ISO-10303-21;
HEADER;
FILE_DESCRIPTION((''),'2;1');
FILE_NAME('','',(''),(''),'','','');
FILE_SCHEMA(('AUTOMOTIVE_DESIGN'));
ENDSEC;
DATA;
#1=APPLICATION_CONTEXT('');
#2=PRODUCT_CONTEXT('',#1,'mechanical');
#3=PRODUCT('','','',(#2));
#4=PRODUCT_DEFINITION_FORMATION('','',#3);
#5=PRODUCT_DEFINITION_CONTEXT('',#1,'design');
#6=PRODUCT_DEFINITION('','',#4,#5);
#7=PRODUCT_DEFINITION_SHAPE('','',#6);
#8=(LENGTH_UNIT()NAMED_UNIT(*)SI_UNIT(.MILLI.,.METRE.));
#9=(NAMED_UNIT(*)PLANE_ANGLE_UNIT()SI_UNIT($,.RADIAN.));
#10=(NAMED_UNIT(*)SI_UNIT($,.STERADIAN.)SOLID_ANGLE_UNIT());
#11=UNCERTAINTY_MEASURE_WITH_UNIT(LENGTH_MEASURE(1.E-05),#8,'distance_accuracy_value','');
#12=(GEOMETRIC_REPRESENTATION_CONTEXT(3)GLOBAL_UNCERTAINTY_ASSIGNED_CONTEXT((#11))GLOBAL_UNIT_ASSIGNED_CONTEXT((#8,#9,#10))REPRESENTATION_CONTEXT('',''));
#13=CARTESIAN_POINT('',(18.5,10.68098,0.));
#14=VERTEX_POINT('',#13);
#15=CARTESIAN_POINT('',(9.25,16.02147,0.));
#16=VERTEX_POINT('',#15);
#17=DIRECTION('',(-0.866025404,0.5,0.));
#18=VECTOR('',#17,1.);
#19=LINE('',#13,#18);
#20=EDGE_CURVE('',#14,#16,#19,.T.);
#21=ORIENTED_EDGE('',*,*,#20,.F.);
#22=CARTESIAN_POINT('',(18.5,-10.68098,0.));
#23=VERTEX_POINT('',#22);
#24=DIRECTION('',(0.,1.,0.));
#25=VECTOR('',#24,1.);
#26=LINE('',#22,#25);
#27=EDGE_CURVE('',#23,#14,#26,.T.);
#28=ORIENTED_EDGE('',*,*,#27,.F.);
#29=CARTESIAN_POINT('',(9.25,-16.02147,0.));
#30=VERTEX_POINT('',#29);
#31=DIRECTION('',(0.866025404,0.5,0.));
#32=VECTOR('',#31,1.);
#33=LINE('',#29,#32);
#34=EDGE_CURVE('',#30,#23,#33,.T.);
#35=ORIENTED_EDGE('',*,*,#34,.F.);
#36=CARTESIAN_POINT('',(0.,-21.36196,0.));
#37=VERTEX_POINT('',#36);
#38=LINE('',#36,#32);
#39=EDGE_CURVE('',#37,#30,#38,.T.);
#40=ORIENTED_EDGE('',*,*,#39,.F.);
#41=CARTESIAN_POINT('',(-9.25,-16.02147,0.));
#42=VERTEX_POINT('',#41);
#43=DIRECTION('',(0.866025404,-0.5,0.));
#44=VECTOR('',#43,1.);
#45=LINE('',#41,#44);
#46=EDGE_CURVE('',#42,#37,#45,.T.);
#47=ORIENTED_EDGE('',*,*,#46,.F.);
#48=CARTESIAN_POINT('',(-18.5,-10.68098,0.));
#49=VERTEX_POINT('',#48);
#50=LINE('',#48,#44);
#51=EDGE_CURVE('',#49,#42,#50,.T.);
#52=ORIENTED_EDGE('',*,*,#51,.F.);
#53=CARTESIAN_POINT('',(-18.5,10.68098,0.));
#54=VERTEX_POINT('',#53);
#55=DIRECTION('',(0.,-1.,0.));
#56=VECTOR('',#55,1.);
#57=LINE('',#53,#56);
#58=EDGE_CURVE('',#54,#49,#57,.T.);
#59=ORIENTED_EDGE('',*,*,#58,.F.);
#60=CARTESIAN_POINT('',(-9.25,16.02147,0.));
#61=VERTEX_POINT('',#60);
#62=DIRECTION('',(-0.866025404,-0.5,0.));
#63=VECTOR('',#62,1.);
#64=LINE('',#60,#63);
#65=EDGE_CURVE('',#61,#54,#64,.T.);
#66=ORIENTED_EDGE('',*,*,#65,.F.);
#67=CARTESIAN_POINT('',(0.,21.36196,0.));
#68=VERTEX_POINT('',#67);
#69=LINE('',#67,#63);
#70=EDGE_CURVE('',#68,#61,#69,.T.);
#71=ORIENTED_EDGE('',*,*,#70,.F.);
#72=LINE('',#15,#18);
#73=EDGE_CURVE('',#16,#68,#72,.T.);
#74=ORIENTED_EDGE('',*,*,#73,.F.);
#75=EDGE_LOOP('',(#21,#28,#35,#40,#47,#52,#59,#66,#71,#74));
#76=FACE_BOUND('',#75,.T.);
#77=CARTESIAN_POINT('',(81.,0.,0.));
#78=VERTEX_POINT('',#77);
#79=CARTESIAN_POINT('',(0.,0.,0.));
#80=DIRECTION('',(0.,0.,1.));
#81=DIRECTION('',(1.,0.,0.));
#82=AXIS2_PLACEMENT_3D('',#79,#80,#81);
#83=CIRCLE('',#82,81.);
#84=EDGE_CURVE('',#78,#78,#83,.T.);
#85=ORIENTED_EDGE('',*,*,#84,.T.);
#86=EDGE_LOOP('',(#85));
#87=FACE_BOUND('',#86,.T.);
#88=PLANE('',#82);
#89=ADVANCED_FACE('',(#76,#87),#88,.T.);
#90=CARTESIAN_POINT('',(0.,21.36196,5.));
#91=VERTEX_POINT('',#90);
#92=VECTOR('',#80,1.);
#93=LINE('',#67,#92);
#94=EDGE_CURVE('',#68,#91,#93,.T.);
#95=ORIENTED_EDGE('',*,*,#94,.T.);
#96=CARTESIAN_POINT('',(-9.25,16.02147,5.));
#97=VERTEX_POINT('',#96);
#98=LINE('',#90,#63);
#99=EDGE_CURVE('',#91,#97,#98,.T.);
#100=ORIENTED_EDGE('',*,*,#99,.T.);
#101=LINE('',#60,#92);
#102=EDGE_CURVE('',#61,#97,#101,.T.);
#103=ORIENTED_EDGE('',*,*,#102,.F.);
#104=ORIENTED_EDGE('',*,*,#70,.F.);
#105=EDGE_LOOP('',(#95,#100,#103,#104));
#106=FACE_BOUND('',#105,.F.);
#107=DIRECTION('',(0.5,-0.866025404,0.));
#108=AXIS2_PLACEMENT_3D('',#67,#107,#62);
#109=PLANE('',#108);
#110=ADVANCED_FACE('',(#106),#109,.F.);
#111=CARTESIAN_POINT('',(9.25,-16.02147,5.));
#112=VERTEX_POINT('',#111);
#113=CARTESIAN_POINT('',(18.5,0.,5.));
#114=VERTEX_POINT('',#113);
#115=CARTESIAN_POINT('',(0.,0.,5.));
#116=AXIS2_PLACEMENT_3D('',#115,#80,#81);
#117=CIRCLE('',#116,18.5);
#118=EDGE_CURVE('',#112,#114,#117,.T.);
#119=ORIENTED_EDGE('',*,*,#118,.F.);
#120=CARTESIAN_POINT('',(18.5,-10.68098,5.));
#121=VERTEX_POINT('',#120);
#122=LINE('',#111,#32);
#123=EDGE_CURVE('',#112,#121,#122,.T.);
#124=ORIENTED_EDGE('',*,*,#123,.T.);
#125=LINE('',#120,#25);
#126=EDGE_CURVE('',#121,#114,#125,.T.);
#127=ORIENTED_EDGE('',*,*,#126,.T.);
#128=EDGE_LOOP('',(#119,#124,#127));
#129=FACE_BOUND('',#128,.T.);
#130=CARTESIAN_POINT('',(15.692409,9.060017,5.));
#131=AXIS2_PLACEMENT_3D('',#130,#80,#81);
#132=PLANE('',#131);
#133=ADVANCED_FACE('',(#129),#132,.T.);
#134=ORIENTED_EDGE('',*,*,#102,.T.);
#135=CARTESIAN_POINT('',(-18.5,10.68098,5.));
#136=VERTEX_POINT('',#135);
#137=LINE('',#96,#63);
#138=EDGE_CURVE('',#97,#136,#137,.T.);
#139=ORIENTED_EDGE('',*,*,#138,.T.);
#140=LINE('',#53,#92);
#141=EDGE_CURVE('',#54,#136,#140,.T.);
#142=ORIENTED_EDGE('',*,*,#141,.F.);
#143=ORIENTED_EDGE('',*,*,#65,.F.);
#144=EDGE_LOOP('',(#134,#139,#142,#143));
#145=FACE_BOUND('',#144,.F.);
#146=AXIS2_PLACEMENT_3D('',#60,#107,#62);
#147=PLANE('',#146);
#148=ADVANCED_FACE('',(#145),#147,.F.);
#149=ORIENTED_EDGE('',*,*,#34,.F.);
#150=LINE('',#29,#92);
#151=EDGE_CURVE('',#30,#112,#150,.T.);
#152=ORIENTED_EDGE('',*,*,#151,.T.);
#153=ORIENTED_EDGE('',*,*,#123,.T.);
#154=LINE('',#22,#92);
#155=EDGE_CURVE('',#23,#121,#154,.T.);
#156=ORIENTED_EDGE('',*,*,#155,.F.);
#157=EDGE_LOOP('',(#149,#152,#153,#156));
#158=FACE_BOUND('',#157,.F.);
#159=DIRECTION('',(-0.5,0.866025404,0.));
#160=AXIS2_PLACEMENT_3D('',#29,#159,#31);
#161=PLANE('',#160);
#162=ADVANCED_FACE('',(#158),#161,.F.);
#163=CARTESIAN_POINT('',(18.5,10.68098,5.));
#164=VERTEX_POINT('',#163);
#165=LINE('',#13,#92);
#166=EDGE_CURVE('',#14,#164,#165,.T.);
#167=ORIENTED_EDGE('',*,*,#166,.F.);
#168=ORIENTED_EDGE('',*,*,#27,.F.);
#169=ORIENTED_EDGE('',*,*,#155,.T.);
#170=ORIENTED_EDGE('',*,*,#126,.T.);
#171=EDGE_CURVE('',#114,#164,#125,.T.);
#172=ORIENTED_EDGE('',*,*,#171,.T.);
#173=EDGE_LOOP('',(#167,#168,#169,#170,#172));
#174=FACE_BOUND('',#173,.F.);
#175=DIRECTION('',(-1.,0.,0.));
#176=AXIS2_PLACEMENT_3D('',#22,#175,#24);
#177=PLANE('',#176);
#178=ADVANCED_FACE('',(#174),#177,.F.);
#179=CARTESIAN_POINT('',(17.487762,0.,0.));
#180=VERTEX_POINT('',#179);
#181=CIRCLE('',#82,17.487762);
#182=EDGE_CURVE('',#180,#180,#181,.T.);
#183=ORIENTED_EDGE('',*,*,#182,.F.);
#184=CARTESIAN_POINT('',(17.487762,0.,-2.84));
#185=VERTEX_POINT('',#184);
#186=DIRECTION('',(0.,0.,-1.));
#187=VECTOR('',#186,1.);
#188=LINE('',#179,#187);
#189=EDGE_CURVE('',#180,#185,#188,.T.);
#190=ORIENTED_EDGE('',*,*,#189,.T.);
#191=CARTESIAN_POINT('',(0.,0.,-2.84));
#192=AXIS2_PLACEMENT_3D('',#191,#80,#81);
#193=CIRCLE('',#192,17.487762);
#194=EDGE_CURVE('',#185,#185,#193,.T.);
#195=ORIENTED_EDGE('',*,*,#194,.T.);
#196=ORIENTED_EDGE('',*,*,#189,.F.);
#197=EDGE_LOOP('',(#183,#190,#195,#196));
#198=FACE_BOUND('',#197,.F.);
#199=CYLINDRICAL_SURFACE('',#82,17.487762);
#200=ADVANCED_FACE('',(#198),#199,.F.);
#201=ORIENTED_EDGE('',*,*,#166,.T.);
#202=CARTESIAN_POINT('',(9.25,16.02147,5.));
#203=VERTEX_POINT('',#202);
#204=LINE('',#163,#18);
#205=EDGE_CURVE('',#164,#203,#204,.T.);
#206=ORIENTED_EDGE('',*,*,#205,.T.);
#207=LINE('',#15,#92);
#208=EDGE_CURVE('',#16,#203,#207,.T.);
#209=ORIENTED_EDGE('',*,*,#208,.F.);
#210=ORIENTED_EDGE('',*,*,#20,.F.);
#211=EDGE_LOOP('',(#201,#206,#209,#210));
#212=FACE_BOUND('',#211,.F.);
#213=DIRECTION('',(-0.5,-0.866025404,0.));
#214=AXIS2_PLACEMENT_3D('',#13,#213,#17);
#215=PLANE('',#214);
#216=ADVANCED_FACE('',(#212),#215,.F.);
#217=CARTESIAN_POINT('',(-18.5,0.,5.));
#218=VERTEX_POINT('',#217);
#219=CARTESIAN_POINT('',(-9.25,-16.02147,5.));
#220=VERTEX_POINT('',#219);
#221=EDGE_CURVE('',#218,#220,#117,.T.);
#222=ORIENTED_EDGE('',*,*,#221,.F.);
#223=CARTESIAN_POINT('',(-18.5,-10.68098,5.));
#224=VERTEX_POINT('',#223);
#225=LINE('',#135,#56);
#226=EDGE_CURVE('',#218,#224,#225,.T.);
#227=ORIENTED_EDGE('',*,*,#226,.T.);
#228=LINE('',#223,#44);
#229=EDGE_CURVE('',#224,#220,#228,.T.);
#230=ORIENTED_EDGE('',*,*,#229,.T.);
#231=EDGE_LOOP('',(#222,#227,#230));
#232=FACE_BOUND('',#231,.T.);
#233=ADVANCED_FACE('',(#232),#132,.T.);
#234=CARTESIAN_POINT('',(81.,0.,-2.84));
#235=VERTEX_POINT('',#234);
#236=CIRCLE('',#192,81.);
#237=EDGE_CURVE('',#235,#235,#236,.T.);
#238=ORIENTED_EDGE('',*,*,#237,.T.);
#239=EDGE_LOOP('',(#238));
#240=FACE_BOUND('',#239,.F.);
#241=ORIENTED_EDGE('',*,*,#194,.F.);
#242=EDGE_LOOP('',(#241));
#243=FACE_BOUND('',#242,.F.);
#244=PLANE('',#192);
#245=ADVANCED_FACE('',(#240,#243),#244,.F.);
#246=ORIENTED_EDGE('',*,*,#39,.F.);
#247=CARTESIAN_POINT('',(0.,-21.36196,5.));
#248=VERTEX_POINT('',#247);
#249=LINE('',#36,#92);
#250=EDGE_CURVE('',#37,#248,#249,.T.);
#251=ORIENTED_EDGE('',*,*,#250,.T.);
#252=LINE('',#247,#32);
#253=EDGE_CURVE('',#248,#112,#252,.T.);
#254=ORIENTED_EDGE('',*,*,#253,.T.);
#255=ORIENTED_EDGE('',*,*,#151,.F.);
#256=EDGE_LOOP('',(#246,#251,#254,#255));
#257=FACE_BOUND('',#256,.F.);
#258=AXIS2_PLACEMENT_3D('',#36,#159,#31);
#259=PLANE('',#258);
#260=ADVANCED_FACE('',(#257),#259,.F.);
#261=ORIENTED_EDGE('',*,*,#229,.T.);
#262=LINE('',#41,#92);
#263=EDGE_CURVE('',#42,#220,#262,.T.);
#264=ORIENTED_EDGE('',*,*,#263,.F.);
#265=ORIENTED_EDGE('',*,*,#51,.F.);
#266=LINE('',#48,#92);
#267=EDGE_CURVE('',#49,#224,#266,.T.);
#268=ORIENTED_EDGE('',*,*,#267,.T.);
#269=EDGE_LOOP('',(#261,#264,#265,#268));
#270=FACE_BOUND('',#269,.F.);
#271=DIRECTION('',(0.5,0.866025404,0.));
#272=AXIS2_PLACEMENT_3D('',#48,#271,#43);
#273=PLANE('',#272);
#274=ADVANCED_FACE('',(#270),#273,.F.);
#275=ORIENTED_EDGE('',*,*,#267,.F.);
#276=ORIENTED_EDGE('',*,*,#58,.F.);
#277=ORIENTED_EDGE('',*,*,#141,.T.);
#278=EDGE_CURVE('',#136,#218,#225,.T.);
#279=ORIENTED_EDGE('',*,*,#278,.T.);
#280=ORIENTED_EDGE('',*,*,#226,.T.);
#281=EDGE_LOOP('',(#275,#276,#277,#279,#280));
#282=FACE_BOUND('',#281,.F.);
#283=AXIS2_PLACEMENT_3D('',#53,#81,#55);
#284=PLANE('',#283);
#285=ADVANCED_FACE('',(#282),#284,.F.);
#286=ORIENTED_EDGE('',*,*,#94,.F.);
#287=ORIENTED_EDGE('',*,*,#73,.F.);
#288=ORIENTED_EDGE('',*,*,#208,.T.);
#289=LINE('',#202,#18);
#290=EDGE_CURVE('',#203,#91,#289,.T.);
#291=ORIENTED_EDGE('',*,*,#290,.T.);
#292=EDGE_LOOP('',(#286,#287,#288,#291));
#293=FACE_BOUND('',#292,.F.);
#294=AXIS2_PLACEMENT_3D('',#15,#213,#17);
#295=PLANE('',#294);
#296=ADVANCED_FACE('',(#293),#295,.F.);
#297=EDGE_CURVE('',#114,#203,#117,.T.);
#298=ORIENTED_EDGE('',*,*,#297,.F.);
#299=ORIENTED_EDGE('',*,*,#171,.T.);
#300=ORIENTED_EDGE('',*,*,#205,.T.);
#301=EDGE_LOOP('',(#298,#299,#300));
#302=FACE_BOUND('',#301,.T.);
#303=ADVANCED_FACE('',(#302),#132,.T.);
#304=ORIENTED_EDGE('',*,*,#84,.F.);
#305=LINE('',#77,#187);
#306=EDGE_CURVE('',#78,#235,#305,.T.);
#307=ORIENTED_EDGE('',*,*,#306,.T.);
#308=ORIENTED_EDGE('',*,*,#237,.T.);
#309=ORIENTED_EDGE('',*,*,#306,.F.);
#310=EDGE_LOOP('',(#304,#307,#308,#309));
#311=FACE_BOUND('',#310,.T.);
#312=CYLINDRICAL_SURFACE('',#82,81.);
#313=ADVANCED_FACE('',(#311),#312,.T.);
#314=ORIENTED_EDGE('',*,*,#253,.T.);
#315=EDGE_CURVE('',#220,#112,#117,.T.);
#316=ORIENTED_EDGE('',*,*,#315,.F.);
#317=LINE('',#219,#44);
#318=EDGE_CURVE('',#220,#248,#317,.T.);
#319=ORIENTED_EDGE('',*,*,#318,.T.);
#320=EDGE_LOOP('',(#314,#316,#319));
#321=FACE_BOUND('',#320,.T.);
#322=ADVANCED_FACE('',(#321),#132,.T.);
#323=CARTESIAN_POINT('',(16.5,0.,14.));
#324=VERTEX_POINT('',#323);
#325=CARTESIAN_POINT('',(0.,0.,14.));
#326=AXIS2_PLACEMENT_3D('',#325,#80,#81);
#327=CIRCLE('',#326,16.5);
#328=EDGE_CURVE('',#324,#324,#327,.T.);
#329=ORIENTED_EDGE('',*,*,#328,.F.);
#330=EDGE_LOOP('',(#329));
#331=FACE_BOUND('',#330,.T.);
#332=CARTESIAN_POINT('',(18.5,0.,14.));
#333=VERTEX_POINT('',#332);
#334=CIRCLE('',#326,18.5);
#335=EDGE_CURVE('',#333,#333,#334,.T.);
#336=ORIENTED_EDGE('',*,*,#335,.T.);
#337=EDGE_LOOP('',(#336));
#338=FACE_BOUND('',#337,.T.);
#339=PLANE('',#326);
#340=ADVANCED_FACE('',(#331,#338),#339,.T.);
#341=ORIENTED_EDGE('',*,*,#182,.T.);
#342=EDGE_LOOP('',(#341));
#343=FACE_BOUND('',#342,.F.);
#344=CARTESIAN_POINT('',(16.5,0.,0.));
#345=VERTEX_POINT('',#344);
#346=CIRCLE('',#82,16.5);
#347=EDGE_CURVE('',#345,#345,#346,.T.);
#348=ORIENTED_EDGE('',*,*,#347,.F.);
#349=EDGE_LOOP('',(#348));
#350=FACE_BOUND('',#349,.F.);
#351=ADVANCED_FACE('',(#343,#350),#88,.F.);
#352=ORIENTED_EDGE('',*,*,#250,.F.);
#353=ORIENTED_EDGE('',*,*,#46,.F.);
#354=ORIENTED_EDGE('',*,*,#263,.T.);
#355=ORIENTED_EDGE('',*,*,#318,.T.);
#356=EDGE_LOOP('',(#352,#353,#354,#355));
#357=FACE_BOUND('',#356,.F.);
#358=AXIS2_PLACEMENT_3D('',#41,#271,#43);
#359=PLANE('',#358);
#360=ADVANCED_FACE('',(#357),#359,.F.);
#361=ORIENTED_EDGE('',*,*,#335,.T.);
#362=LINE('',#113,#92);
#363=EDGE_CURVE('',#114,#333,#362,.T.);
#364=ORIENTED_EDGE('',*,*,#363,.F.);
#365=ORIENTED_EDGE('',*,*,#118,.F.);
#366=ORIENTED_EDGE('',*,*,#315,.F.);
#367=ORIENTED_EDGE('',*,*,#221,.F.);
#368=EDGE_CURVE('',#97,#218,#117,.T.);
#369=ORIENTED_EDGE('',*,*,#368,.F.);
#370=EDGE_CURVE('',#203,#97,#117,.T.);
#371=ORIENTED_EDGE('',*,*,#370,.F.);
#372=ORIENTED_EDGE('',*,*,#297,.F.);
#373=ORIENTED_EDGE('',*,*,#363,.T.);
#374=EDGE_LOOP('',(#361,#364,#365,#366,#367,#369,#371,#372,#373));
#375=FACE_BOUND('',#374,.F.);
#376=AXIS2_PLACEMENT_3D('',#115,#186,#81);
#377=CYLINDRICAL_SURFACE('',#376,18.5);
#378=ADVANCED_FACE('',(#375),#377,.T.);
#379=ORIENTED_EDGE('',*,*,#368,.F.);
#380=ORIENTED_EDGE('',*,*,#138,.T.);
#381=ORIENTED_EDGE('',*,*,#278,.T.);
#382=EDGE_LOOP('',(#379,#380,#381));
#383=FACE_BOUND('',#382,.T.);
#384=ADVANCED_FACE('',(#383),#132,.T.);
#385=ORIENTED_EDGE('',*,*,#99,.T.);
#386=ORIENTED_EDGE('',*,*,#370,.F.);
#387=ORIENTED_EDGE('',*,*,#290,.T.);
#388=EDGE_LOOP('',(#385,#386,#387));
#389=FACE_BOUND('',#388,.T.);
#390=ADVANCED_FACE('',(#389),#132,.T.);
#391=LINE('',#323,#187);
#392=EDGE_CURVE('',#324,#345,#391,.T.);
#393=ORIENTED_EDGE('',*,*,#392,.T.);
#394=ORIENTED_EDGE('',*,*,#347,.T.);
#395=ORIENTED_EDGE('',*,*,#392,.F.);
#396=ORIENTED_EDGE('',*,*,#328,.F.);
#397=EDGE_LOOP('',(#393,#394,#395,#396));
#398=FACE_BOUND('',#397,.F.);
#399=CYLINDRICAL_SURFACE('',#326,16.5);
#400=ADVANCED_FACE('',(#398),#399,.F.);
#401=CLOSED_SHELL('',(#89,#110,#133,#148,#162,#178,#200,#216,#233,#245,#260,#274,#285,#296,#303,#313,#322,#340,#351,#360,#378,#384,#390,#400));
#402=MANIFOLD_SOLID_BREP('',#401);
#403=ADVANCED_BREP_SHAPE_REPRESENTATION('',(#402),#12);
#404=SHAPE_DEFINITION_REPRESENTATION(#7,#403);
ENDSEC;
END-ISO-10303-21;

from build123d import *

# Parameters (mm, degrees)
F1_DEPTH = 5
F2_R     = 18.5
F3_DEPTH = 9
F4_R     = 16.5
F5_DEPTH = 25
F6_R     = 81
F7_DEPTH = 2.84
F8_R     = 17.4877623158
F9_DEPTH = 25


with BuildPart() as f1:
    # F0 (on Top) → F1 (new body)
    with BuildSketch(Plane.XY):
        with BuildLine():
            Line((18.5, 0), (18.5, 10.68097998))
            Line((18.5, 10.68097998), (9.2500001737, 16.0214698697))
            ThreePointArc((9.2500001737, 16.0214698697), (16.0214700202, 9.2499999131), (18.5, 0))
        make_face()
        with BuildLine():
            ThreePointArc((9.2500002367, -16.0214698334), (16.0214700383, -9.2499998817), (18.5, 0))
            ThreePointArc((18.5, 0), (16.0214700202, 9.2499999131), (9.2500001737, 16.0214698697))
            ThreePointArc((9.2500001737, 16.0214698697), (3.666e-07, 18.5), (-9.2499995387, 16.0214702364))
            ThreePointArc((-9.2499995387, 16.0214702364), (-16.0214698368, 9.2500002307), (-18.5, 0))
            ThreePointArc((-18.5, 0), (-16.0214699908, -9.2499999641), (-9.2500000719, -16.0214699285))
            ThreePointArc((-9.2500000719, -16.0214699285), (9.51e-08, -18.5), (9.2500002367, -16.0214698334))
        make_face()
        with BuildLine():
            Line((18.5, -10.68097998), (18.5, 0))
            ThreePointArc((18.5, 0), (16.0214700383, -9.2499998817), (9.2500002367, -16.0214698334))
            Line((9.2500002367, -16.0214698334), (18.5, -10.68097998))
        make_face()
        with BuildLine():
            ThreePointArc((-9.2499995387, 16.0214702364), (3.666e-07, 18.5), (9.2500001737, 16.0214698697))
            Line((9.2500001737, 16.0214698697), (0, 21.36195996))
            Line((0, 21.36195996), (-9.2499995387, 16.0214702364))
        make_face()
        with BuildLine():
            Line((0, -21.36195996), (9.2500002367, -16.0214698334))
            ThreePointArc((9.2500002367, -16.0214698334), (9.51e-08, -18.5), (-9.2500000719, -16.0214699285))
            Line((-9.2500000719, -16.0214699285), (0, -21.36195996))
        make_face()
        with BuildLine():
            ThreePointArc((-18.5, 0), (-16.0214698368, 9.2500002307), (-9.2499995387, 16.0214702364))
            Line((-9.2499995387, 16.0214702364), (-18.5, 10.68097998))
            Line((-18.5, 10.68097998), (-18.5, 0))
        make_face()
        with BuildLine():
            Line((-18.5, -10.68097998), (-9.2500000719, -16.0214699285))
            ThreePointArc((-9.2500000719, -16.0214699285), (-16.0214699908, -9.2499999641), (-18.5, 0))
            Line((-18.5, 0), (-18.5, -10.68097998))
        make_face()
    extrude(amount=F1_DEPTH)

    # F2 (on face) → F3 (join)
    with BuildSketch(Plane.XY.offset(5)):
        Circle(F2_R)
    extrude(amount=F3_DEPTH)

    # F4 (on face) → F5 (cut)
    with BuildSketch(Plane.XY.offset(14)):
        Circle(F4_R)
    extrude(amount=-F5_DEPTH, mode=Mode.SUBTRACT)

    # F6 (on Top) → F7 (join)
    with BuildSketch(Plane.XY):
        Circle(F6_R)
    extrude(amount=-F7_DEPTH)

    # F8 (on face) → F9 (cut)
    with BuildSketch(Plane.XY):
        Circle(F8_R)
    extrude(amount=-F9_DEPTH, mode=Mode.SUBTRACT)


solid = f1.part
